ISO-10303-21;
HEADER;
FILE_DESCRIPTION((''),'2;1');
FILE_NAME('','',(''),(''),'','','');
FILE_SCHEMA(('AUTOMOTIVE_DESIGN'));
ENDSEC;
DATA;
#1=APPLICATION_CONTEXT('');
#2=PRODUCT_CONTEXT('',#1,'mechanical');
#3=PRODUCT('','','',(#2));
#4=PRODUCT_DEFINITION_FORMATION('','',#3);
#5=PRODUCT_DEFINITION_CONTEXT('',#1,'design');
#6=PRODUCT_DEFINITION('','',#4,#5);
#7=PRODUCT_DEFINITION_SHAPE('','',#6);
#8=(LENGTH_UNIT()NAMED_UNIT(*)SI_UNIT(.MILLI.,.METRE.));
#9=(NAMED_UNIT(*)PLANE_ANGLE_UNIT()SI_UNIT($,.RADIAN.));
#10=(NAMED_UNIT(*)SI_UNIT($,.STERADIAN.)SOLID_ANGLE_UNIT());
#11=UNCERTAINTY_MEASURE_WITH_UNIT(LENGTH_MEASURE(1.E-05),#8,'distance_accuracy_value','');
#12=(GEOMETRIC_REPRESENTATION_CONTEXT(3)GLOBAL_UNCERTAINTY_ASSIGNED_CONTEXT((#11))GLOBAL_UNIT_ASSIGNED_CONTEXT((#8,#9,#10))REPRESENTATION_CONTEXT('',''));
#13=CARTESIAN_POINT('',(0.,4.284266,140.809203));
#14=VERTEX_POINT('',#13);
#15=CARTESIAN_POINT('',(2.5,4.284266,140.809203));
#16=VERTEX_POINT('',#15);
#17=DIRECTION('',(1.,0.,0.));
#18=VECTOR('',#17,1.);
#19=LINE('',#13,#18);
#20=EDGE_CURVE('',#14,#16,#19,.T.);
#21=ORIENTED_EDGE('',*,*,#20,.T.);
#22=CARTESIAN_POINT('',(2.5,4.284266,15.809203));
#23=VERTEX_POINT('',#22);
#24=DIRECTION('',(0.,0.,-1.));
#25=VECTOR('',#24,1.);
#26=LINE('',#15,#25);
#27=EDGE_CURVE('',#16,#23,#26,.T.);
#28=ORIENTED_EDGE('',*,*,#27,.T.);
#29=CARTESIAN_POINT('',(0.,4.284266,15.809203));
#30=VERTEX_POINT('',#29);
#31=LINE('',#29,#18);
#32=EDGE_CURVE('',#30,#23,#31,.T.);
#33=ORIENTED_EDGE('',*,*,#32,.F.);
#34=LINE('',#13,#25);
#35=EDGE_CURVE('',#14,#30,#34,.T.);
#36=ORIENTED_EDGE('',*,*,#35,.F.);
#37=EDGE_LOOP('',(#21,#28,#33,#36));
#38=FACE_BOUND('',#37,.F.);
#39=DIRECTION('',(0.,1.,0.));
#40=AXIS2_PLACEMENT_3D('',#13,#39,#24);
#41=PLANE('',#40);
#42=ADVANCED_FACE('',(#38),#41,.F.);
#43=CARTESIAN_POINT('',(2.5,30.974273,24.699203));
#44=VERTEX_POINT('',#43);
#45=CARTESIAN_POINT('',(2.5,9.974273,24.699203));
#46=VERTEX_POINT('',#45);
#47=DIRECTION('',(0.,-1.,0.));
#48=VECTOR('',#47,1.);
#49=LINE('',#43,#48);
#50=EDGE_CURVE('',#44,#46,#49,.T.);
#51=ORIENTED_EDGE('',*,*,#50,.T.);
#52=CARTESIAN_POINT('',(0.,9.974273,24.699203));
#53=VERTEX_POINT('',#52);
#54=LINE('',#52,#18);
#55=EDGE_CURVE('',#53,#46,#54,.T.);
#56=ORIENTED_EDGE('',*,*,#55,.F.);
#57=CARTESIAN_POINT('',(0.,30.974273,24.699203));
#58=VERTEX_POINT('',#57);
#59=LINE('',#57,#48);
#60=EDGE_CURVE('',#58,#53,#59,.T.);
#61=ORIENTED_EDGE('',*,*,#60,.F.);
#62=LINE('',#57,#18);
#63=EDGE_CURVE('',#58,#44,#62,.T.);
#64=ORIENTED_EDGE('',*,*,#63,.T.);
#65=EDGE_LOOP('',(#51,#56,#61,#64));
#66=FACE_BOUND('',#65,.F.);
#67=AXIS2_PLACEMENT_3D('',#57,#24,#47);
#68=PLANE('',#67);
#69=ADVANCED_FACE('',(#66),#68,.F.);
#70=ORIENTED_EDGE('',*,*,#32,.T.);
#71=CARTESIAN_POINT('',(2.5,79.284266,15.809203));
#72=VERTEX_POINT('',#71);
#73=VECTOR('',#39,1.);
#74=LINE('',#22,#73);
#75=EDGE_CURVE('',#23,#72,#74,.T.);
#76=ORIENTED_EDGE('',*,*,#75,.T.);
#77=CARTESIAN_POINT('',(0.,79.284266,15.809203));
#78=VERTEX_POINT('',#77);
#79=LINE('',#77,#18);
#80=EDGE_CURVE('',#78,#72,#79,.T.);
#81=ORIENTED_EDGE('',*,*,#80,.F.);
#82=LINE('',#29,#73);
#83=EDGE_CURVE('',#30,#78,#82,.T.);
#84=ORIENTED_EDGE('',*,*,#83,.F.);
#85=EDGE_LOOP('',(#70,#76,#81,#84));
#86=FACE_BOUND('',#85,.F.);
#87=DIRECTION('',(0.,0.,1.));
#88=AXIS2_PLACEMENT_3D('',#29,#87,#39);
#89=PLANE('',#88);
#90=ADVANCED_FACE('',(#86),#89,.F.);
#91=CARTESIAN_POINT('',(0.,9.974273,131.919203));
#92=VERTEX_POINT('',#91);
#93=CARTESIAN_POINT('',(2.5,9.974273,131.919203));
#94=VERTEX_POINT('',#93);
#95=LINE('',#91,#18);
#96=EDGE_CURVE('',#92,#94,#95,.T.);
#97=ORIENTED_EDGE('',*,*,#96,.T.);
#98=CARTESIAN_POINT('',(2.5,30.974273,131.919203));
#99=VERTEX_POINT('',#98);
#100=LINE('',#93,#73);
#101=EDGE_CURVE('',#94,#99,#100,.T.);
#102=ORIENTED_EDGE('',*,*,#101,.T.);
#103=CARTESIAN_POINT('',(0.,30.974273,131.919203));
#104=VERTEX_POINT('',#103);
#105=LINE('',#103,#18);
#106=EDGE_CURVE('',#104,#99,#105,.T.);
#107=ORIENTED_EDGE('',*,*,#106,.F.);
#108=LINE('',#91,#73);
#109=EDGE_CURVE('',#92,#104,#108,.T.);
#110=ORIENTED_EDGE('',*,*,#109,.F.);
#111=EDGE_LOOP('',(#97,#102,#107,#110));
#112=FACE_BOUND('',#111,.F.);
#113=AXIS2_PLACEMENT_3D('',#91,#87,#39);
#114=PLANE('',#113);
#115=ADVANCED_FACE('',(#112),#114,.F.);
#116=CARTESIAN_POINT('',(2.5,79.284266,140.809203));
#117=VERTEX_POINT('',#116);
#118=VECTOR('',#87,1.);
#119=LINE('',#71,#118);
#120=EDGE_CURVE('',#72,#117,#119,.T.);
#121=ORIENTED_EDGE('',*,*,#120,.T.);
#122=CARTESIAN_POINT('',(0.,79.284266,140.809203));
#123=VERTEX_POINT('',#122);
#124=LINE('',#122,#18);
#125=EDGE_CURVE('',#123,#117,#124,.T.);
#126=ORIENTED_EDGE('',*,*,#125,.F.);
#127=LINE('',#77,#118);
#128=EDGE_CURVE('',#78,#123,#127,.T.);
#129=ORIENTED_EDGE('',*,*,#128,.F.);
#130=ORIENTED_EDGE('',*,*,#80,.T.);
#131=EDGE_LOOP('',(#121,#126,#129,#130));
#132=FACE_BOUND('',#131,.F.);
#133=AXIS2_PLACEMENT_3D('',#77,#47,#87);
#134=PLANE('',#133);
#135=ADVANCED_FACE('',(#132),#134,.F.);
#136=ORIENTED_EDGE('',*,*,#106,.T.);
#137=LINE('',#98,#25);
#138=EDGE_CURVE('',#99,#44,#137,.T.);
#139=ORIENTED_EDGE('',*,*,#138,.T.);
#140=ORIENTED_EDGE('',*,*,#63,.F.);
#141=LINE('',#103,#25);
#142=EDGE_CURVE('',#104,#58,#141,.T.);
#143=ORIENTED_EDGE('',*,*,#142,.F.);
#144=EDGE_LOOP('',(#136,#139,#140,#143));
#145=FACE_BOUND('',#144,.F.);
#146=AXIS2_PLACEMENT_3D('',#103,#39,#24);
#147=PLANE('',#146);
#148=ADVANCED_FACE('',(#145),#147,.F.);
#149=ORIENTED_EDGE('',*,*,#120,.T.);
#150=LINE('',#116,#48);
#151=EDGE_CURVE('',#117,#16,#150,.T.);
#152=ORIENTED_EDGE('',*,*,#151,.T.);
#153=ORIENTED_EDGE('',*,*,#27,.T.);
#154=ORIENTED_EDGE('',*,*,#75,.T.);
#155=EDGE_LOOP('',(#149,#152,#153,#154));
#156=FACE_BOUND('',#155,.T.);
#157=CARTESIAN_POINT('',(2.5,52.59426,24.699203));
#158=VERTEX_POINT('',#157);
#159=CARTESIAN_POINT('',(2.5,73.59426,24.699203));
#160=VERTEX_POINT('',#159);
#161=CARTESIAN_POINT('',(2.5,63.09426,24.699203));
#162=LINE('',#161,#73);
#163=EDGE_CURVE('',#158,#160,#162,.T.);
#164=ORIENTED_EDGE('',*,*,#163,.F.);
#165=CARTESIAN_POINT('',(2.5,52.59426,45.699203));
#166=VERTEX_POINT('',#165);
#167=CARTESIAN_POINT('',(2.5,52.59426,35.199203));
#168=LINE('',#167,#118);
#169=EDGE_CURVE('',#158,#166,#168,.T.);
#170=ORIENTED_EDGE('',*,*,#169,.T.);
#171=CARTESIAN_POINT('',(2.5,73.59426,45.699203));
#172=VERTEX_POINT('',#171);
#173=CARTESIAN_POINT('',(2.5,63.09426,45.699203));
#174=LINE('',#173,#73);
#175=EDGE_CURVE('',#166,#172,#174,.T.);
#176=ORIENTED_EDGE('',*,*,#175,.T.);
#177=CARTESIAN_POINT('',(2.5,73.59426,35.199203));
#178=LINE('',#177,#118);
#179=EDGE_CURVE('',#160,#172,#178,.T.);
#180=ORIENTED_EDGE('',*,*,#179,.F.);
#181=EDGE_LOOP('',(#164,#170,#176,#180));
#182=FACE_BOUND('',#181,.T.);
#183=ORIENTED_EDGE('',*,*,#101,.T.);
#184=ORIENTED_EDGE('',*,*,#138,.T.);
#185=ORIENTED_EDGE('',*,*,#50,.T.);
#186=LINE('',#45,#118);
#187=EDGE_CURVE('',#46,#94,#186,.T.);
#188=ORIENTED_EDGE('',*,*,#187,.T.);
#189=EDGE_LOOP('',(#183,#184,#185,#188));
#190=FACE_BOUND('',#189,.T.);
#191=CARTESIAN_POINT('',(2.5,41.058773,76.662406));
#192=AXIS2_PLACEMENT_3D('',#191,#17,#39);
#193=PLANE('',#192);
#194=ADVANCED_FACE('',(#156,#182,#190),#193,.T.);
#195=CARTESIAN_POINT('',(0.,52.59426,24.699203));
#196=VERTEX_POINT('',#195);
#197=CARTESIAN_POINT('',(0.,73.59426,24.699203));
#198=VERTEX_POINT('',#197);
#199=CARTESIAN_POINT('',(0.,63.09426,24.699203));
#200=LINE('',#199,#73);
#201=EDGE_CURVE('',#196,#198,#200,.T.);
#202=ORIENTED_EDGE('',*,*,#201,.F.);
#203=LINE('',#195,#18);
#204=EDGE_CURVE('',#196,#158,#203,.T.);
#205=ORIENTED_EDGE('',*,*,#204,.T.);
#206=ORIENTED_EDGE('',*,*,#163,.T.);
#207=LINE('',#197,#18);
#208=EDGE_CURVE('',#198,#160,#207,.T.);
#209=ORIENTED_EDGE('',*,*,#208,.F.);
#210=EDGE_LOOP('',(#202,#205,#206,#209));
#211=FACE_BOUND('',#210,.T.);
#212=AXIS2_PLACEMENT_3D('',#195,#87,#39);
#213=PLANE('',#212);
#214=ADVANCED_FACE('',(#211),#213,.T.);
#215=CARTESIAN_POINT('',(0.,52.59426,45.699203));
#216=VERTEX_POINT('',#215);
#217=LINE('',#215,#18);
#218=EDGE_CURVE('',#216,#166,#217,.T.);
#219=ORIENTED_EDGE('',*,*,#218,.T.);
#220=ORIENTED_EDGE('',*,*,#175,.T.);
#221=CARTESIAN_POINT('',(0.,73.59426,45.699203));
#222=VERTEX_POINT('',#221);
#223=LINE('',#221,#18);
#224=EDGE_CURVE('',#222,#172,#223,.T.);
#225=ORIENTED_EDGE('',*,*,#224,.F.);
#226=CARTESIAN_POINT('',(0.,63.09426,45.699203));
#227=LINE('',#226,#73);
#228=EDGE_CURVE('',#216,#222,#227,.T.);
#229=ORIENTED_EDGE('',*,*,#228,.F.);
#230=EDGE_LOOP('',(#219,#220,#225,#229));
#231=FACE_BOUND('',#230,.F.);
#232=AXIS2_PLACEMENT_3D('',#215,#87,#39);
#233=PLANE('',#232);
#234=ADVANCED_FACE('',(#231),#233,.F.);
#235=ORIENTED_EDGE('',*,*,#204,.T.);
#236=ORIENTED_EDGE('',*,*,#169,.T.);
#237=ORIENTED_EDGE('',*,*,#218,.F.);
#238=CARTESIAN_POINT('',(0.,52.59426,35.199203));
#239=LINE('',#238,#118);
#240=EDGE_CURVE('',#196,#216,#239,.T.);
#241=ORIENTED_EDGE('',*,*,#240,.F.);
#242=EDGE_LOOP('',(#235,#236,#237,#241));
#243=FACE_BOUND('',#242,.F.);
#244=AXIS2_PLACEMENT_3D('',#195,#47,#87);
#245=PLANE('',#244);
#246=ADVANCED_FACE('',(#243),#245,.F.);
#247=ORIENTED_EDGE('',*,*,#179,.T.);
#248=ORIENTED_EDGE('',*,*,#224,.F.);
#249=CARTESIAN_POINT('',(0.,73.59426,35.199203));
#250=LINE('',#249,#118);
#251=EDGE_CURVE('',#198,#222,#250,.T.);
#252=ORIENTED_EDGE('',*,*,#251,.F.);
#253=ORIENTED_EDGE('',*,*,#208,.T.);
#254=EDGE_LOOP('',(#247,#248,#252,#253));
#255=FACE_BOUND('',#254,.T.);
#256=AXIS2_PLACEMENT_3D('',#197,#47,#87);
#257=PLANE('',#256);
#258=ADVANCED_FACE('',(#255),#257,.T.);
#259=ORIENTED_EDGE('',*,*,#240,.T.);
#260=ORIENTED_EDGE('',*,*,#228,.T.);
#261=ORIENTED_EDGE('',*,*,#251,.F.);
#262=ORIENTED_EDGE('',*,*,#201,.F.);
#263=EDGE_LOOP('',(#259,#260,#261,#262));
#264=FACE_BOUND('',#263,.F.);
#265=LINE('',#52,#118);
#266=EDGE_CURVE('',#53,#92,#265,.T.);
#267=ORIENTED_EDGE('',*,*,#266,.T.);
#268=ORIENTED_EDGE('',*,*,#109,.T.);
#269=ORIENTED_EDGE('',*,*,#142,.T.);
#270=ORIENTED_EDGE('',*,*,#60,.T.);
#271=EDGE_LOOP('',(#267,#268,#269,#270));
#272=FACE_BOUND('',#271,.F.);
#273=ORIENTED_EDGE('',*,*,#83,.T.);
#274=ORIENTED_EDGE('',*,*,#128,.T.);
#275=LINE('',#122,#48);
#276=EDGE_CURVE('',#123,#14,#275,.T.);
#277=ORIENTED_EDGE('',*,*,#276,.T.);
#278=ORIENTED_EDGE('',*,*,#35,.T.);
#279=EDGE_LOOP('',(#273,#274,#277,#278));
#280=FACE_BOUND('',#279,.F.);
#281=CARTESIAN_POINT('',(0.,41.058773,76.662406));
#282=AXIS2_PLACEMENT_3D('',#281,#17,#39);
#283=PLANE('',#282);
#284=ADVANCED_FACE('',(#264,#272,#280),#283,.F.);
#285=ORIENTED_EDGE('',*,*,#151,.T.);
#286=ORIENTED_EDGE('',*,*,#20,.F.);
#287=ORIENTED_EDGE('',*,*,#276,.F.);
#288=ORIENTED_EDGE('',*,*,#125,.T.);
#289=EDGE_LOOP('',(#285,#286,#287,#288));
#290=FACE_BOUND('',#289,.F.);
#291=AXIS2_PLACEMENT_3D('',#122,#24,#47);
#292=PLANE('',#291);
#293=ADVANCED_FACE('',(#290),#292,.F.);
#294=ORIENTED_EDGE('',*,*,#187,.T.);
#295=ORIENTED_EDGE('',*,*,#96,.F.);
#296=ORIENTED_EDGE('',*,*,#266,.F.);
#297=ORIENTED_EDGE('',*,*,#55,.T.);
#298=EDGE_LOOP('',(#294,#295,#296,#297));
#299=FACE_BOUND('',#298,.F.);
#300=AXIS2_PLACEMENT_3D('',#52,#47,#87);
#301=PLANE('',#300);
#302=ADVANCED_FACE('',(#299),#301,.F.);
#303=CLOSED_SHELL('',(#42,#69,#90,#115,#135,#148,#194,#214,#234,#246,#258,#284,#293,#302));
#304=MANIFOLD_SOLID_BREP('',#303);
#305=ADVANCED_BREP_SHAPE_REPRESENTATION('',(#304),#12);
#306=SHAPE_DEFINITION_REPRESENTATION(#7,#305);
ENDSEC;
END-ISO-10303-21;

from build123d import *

# Parameters (mm, degrees)
F0_W     = 13.9900064
F0_H     = 3.81
F0_W_2   = 21
F0_H_2   = 21
F1_DEPTH = 2.5


# Not quite as in the source:
# - a feature names something its author has since deleted; it is built from what else it names


with BuildPart() as f1:
    # F0 (on Right) → F1 (new body)
    with BuildSketch(Plane.YZ):
        Polygon((4.2842663067, 140.8092032793), (4.2842663067, 15.8092032793), (79.2842663067, 15.8092032793), (79.2842663067, 140.8092032793), (75.4742663067, 140.8092032793), (75.4742663067, 136.9992032793), (75.4742663067, 19.6192032793), (8.0942663067, 19.6192032793), (8.0942663067, 136.9992032793), (55.7998448917, 136.9992032793), (61.4842599067, 136.9992032793), (61.4842599067, 140.8092032793), (55.7998448917, 140.8092032793), (11.2942599067, 140.8092032793), align=None)
        with Locations((68.4792631067, 138.9042032793)):
            Rectangle(F0_W, F0_H)
        Polygon((75.4742663067, 19.6192032793), (75.4742663067, 136.9992032793), (61.4842599067, 136.9992032793), (55.7998448917, 136.9992032793), (8.0942663067, 136.9992032793), (8.0942663067, 19.6192032793), align=None)
        Polygon((9.9742727067, 45.6992032793), (9.9742727067, 131.9192032793), (30.9742727067, 131.9192032793), (30.9742727067, 110.9192032793), (30.9742727067, 45.6992032793), (30.9742727067, 24.6992032793), (9.9742727067, 24.6992032793), align=None, mode=Mode.SUBTRACT)
        with Locations((63.0942599067, 35.1992032793)):
            Rectangle(F0_W_2, F0_H_2, mode=Mode.SUBTRACT)
    extrude(amount=F1_DEPTH)


solid = f1.part
